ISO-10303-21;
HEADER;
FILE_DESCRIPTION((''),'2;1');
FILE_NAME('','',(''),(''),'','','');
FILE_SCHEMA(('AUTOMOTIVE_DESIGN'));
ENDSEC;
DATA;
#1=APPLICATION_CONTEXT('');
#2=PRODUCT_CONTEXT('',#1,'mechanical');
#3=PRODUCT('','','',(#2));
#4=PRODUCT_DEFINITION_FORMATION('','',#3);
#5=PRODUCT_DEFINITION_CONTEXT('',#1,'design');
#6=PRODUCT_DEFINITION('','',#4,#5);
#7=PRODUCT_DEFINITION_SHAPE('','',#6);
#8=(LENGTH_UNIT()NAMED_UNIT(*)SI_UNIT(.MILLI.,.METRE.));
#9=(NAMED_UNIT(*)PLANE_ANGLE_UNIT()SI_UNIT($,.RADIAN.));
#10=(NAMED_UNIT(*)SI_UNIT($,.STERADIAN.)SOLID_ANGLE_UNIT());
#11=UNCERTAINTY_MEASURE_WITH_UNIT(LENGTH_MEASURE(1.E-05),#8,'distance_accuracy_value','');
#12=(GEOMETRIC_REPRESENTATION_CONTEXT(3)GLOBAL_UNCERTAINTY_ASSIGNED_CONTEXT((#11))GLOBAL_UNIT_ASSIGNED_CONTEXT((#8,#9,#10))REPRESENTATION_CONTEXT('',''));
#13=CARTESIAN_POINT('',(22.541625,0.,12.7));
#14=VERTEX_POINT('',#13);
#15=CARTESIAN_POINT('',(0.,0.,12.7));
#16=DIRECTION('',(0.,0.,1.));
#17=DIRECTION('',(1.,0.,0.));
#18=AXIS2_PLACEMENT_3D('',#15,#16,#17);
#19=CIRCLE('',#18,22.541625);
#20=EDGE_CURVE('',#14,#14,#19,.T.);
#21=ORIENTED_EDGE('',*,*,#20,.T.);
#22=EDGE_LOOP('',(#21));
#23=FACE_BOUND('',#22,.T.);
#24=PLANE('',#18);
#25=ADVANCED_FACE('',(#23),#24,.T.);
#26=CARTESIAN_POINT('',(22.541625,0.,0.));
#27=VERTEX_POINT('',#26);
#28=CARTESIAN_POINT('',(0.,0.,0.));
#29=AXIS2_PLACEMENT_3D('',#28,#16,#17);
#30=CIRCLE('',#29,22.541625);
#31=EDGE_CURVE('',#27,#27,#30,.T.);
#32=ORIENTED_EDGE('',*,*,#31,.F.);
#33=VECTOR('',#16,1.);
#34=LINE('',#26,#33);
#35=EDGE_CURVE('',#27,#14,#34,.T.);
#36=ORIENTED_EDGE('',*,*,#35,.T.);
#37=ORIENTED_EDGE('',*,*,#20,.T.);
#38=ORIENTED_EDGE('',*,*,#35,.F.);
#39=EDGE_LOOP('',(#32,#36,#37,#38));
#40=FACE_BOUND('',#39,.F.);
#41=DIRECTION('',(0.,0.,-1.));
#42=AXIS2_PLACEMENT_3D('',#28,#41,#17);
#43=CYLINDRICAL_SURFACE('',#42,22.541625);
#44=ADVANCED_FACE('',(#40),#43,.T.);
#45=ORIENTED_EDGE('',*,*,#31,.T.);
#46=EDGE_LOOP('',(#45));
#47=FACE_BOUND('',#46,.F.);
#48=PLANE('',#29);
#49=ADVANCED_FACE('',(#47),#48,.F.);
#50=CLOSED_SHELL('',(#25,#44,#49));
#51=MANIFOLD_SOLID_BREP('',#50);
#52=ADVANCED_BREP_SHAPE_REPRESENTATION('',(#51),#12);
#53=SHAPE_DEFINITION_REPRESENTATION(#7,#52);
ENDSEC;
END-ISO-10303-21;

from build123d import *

# Parameters (mm, degrees)
F0_R     = 22.5416252379
F2_DEPTH = 12.7
F3_R     = 22.6896174347
F4_DEPTH = 2.54


# Not quite as in the source:
# - the program builds the solid bodies; features that only make, move or delete a surface that nothing else refers to are left out


with BuildPart() as f2:
    # F0 (on Top) → F2 (new body)
    with BuildSketch(Plane.XY):
        Circle(F0_R)
    extrude(amount=F2_DEPTH)

    # F3 (on Top) → F4 (cut)
    with BuildSketch(Plane.XY):
        Circle(F3_R)
    extrude(amount=-F4_DEPTH, mode=Mode.SUBTRACT)


solid = f2.part
